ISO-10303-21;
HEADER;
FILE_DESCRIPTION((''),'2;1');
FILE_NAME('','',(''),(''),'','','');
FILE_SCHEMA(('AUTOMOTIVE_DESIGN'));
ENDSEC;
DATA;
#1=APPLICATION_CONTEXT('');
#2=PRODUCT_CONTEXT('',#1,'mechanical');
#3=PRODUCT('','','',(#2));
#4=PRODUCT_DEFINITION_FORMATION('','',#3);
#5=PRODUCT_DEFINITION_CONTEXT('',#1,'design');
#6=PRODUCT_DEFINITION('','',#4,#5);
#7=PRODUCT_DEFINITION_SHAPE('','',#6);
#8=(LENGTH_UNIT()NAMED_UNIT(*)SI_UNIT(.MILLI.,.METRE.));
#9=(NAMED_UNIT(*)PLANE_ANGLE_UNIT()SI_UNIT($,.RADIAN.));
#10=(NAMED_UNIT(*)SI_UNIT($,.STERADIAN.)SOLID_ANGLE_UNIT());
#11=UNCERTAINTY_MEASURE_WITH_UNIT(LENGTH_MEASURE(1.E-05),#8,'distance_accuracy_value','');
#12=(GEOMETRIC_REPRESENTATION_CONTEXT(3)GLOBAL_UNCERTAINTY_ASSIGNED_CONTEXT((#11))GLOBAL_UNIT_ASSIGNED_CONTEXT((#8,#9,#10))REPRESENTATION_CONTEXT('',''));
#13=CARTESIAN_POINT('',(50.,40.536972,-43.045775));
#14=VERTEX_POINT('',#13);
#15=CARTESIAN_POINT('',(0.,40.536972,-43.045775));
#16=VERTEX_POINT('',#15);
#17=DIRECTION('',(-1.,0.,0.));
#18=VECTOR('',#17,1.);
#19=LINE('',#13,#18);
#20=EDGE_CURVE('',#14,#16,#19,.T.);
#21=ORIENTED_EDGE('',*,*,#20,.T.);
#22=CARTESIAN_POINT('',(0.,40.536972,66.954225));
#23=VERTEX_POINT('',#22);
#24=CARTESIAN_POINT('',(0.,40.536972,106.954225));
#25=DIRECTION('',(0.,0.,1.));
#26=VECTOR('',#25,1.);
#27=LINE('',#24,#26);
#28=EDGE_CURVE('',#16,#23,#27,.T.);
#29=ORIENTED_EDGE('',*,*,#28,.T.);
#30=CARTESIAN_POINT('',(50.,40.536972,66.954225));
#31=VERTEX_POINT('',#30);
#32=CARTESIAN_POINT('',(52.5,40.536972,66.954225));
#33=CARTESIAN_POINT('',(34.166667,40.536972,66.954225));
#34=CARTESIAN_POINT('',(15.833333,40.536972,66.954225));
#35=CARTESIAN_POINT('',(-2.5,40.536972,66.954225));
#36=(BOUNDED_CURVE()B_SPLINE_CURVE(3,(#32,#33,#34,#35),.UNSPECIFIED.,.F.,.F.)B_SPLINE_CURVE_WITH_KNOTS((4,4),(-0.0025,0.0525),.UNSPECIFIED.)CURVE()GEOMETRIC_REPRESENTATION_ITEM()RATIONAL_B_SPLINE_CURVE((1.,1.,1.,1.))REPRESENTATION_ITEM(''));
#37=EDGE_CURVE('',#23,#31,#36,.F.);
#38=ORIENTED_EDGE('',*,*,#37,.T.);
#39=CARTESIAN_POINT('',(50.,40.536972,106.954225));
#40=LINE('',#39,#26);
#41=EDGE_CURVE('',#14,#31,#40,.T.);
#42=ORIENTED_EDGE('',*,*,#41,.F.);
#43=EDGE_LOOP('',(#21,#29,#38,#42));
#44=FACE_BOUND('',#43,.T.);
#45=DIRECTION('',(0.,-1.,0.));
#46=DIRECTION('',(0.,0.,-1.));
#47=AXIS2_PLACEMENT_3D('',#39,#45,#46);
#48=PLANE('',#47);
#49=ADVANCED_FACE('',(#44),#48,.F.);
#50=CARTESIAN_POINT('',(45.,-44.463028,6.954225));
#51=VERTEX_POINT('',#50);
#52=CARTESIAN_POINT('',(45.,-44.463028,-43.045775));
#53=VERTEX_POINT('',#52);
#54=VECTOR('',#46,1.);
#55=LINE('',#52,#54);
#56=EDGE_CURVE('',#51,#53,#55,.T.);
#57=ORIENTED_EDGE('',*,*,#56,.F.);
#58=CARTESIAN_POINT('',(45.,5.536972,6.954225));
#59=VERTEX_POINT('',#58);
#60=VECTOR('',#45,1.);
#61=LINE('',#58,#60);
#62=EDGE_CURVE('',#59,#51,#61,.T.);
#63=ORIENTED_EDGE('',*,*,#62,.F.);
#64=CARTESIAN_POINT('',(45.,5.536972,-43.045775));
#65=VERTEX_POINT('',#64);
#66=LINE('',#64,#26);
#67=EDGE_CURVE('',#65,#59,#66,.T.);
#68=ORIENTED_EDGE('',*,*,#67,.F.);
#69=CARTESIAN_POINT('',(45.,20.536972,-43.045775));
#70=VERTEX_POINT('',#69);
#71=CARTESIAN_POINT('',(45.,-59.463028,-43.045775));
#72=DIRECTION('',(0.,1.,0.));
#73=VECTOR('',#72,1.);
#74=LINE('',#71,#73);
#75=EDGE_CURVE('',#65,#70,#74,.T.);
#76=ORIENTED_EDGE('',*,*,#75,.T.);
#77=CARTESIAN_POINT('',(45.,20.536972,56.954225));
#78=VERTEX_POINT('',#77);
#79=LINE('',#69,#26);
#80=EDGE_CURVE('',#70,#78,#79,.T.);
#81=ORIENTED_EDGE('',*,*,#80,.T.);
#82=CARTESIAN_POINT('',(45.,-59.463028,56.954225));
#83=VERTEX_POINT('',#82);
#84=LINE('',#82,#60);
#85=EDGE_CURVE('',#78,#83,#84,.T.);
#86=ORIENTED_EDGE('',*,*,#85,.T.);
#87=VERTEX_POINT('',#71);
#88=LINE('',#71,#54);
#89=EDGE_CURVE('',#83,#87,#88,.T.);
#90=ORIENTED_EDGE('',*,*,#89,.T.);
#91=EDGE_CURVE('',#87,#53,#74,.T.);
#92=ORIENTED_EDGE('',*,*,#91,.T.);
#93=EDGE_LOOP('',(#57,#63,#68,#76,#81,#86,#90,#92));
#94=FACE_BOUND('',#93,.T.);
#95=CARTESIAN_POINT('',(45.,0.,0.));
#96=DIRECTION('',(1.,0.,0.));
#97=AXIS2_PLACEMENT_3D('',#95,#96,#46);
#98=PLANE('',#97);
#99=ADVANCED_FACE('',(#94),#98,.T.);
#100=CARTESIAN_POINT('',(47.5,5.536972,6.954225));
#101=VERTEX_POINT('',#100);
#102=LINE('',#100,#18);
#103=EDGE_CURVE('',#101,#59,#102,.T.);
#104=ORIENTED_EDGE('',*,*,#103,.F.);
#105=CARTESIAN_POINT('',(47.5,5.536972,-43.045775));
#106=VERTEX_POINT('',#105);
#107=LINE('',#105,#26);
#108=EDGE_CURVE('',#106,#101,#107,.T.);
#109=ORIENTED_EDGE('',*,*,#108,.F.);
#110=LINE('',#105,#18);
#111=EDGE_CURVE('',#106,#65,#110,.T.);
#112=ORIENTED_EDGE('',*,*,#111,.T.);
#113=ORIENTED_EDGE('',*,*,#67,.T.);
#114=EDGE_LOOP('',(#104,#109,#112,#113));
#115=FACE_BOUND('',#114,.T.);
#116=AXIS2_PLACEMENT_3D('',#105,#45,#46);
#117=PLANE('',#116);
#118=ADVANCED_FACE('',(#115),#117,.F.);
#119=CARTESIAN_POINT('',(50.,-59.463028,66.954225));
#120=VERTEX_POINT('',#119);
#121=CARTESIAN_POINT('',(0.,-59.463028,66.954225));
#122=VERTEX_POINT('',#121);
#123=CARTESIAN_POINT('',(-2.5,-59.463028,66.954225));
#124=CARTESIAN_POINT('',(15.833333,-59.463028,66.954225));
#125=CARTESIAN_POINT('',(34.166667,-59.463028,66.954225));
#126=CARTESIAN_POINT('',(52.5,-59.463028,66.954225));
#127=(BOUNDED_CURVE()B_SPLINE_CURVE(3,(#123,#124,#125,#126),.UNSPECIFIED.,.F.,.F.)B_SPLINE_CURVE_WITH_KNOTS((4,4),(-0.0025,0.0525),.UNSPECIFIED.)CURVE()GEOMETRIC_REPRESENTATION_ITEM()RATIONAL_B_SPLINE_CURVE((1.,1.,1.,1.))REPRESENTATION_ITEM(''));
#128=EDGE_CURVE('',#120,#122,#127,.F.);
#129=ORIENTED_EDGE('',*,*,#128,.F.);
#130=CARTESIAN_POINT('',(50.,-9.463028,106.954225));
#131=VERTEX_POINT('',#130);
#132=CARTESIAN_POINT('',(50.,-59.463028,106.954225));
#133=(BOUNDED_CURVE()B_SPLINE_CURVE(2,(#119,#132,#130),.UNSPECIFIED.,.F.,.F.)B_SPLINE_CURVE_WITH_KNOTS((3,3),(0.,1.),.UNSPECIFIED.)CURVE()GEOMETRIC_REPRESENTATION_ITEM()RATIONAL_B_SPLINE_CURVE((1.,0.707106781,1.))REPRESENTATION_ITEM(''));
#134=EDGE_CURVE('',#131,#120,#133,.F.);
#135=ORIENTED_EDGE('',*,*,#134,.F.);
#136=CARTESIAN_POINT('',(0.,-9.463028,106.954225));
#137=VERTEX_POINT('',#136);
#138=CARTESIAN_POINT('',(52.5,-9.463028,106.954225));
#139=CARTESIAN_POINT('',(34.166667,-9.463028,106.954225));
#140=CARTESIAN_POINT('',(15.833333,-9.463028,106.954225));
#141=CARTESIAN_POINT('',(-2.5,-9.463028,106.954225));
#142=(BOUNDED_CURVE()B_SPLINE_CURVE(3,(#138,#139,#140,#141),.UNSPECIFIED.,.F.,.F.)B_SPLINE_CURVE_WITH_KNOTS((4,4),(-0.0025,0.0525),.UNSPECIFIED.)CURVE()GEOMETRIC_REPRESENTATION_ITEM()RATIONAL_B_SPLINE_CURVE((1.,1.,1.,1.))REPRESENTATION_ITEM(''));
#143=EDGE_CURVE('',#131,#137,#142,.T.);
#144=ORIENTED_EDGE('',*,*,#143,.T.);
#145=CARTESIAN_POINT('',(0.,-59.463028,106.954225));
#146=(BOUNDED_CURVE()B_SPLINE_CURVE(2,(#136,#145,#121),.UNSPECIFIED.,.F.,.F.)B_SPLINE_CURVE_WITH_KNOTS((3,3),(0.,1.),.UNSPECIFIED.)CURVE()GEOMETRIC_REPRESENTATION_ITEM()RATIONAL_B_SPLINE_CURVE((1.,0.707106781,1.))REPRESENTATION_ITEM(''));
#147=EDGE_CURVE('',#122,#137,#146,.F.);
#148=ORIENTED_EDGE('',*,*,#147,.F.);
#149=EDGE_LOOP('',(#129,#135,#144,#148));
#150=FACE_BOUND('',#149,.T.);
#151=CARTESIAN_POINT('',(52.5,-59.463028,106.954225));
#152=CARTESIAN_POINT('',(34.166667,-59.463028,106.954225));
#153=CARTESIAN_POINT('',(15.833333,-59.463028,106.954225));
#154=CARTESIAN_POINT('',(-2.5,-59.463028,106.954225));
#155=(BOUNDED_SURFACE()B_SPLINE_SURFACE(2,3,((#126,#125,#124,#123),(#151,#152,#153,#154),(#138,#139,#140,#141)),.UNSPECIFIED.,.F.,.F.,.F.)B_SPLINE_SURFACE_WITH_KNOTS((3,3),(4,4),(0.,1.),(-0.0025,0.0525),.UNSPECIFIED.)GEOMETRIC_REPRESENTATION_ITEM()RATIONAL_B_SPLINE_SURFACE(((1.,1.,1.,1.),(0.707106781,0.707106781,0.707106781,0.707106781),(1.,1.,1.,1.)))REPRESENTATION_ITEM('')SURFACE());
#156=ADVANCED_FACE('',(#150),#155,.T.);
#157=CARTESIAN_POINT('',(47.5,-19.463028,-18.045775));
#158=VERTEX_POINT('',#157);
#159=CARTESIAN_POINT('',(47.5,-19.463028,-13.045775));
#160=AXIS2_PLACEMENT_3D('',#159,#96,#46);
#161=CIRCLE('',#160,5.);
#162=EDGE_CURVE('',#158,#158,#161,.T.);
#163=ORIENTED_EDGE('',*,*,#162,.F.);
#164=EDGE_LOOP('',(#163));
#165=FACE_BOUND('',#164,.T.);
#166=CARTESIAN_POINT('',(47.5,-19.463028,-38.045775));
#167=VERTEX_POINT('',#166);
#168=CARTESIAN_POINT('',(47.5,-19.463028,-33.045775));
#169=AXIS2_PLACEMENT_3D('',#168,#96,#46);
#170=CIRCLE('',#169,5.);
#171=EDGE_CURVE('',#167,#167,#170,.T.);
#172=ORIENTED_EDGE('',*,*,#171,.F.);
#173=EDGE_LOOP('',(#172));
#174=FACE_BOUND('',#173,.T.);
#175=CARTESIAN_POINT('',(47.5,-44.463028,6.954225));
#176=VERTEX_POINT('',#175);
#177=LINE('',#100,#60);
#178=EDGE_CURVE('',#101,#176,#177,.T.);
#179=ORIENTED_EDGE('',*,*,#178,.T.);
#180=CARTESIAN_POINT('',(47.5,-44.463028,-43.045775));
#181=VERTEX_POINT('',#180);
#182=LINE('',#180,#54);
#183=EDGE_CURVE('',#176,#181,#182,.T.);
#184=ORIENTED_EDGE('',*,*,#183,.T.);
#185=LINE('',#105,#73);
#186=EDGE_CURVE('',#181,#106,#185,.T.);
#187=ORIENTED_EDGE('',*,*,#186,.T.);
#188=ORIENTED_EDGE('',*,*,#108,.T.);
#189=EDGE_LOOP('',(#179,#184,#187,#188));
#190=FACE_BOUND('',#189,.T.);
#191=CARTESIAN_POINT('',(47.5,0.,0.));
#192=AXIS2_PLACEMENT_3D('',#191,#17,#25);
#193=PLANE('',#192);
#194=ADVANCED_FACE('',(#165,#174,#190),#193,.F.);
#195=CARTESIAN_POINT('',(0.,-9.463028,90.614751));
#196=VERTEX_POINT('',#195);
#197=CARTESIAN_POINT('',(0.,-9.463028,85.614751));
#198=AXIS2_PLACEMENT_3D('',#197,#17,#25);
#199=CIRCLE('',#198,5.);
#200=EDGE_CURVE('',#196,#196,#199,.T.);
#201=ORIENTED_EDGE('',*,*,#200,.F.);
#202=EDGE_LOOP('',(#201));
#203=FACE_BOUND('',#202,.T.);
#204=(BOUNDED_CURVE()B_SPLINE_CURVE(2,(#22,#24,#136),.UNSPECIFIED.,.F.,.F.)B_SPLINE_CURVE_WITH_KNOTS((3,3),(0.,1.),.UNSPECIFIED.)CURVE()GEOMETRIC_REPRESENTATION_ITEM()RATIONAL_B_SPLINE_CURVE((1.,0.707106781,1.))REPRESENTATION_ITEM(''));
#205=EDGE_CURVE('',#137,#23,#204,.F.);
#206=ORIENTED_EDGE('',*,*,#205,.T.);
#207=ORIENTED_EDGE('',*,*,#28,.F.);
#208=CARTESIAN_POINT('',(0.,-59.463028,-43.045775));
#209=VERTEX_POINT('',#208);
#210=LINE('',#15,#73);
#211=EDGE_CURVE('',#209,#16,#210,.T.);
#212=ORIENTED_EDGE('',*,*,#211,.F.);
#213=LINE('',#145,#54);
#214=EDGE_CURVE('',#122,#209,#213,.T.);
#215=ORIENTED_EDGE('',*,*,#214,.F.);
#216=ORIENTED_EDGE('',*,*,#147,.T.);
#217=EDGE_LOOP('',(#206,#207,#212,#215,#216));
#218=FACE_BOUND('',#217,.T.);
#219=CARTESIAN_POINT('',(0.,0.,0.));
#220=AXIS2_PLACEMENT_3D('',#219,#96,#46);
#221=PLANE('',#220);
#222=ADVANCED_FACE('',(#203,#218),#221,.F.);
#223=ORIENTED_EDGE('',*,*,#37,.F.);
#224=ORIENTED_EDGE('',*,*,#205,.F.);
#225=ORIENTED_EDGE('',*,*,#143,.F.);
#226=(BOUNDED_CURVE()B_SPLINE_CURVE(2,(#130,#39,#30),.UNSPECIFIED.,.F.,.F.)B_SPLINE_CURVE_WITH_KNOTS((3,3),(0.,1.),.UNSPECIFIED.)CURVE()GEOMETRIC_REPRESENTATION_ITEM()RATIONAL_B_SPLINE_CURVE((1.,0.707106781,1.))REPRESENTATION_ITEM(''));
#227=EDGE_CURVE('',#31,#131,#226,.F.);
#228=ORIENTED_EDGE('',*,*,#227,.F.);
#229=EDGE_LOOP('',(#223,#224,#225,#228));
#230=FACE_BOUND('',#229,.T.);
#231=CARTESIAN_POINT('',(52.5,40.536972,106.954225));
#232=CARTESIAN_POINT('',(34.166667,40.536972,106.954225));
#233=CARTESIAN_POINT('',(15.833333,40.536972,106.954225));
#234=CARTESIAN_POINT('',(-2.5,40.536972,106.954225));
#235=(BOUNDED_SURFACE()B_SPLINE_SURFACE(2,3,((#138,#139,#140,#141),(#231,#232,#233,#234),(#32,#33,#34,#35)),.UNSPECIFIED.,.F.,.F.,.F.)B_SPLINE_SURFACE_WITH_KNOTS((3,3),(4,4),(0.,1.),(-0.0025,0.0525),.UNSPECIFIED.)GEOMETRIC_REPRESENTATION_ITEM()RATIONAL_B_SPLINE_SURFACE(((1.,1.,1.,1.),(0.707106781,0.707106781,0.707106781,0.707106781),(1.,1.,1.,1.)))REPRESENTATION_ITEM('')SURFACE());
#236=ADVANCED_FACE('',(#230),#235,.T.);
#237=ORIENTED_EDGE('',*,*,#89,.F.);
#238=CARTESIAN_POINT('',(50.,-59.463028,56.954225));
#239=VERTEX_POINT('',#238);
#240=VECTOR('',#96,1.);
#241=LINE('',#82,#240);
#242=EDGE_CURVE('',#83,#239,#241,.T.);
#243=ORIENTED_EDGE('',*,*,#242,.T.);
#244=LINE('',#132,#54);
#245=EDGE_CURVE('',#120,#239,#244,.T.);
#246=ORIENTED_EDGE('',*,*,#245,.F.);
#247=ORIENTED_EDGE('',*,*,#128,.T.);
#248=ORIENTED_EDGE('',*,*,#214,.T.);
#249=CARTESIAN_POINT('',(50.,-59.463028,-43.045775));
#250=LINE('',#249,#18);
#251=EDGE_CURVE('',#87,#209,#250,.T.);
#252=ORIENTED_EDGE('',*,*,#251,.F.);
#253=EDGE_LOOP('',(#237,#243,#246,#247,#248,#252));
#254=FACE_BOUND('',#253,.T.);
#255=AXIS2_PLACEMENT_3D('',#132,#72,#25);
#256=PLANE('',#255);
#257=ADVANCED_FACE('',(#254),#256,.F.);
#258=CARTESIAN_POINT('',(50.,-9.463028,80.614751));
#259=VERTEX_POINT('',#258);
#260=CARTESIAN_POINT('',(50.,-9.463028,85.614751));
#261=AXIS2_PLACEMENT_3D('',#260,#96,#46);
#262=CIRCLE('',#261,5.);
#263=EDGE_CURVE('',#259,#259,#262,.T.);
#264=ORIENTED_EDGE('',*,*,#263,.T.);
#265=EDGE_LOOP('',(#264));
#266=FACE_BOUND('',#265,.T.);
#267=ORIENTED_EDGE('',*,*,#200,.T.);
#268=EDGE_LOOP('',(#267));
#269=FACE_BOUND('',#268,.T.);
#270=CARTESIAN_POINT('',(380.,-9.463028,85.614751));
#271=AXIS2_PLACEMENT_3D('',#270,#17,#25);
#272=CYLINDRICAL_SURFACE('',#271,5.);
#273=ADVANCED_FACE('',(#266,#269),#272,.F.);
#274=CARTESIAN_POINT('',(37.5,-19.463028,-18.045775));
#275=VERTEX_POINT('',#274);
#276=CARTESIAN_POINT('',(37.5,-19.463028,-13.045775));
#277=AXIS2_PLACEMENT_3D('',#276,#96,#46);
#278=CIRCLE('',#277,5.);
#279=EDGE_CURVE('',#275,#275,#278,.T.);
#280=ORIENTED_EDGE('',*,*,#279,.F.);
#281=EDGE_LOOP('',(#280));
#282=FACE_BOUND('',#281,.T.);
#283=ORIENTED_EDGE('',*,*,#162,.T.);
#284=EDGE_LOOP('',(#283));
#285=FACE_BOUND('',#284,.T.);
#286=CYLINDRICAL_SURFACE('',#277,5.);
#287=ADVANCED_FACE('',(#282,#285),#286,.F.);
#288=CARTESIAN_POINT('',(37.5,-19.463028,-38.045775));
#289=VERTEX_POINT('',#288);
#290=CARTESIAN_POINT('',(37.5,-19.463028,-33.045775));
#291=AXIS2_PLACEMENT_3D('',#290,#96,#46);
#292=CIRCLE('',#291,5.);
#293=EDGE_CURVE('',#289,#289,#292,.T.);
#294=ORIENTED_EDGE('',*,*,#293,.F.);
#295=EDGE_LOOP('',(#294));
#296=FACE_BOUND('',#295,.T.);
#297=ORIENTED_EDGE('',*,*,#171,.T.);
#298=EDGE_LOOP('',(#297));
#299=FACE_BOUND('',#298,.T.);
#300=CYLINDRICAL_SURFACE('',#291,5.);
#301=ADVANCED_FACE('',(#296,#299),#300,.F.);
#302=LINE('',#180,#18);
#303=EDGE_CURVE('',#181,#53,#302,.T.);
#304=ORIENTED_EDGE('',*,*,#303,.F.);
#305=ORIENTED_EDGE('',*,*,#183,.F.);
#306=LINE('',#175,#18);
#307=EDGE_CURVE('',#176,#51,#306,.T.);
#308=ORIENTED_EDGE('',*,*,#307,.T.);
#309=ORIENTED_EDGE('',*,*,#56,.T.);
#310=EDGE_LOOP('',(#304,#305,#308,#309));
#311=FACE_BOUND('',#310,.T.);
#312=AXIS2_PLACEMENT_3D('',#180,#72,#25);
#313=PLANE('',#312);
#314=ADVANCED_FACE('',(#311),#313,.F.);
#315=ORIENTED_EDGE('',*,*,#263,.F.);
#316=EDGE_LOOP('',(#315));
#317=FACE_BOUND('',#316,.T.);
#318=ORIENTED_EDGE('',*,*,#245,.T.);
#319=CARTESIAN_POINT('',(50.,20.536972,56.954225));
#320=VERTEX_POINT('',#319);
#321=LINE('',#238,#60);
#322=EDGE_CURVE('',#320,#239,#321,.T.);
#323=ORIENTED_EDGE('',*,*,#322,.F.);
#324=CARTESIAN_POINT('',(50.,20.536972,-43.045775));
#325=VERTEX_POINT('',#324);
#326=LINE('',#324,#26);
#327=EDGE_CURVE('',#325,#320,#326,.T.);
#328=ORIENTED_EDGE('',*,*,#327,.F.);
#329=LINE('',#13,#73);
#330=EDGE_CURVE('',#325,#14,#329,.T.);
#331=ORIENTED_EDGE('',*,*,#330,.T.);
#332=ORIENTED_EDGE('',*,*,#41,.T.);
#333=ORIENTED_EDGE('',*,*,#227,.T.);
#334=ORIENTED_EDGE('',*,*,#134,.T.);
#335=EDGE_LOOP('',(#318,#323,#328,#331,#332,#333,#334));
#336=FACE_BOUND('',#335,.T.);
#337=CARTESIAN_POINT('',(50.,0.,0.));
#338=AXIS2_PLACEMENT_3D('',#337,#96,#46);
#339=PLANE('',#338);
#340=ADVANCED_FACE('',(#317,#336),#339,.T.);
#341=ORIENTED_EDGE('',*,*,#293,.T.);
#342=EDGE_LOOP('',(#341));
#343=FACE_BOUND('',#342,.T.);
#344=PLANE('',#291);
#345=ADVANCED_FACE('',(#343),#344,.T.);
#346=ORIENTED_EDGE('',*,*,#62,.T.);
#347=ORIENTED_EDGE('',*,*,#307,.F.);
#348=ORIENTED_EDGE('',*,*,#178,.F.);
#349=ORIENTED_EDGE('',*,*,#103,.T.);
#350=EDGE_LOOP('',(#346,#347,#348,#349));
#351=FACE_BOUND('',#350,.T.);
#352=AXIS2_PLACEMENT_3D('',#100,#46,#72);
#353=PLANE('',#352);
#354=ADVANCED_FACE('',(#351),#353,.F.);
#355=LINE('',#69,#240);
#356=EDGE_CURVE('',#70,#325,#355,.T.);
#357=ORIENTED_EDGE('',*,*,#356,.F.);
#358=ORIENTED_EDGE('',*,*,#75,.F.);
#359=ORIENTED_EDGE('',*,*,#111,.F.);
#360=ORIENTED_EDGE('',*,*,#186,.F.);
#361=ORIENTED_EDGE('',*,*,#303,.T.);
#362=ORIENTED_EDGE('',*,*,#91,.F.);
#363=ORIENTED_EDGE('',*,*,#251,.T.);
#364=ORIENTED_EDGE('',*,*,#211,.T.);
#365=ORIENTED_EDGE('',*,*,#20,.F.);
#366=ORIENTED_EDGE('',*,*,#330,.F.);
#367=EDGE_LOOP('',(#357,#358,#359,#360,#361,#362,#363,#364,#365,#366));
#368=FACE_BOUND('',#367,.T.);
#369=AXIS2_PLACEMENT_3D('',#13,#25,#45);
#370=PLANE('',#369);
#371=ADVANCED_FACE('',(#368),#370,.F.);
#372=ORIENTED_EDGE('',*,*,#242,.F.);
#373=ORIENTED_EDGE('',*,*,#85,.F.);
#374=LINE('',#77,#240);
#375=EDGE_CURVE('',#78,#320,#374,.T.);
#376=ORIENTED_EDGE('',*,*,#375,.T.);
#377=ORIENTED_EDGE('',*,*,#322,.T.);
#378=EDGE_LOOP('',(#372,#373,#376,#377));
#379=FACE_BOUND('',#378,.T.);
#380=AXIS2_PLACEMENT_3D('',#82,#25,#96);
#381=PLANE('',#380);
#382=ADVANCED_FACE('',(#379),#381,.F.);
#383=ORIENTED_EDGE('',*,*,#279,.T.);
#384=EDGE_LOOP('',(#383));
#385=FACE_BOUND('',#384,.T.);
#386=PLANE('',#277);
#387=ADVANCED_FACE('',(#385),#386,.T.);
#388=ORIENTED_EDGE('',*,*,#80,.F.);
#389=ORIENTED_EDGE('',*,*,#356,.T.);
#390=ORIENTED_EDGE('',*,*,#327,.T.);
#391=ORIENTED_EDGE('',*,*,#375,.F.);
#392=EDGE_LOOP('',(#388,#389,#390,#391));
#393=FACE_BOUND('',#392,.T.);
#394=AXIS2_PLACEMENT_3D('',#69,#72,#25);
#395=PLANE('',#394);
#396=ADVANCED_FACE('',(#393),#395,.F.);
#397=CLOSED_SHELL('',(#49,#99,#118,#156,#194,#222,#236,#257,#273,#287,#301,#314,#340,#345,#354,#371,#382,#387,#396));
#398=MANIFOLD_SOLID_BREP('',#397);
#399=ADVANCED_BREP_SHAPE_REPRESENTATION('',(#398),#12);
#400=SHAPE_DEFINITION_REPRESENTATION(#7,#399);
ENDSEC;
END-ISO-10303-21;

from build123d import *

# Parameters (mm, degrees)
SKIZZE1_W                       = 150
SKIZZE1_H                       = 100
AUFSATZ_LINEAR_AUSTRAGEN1_DEPTH = 50
SKIZZE2_W                       = 100
SKIZZE2_H                       = 80
SCHNITT_LINEAR_AUSTRAGEN1_DEPTH = 5
SKIZZE3_W                       = 50
SKIZZE3_H                       = 50
AUFSATZ_LINEAR_AUSTRAGEN2_DEPTH = 2.5
SKIZZE4_R                       = 5
SCHNITT_LINEAR_AUSTRAGEN2_DEPTH = 10
VERRUNDUNG1_SIZE                = 50
VERRUNDUNG1_SIZE_2              = 40
SKIZZE5_R                       = 5
SCHNITT_LINEAR_AUSTRAGEN3_DEPTH = 380


with BuildPart() as part:
    # Skizze1 → Aufsatz-Linear austragen1 (new body)
    with BuildSketch(Plane(origin=(0, 0, 0), x_dir=(0, 0, -1), z_dir=(1, 0, 0))):
        with Locations((-31.954225352, -9.463028169)):
            Rectangle(SKIZZE1_W, SKIZZE1_H)
    extrude(amount=AUFSATZ_LINEAR_AUSTRAGEN1_DEPTH)

    # Skizze2 → Schnitt-Linear austragen1 (cut)
    with BuildSketch(Plane(origin=(50, 0, 0), x_dir=(0, 0, -1), z_dir=(1, 0, 0))):
        with Locations((-6.954225352, -19.463028169)):
            Rectangle(SKIZZE2_W, SKIZZE2_H)
    extrude(amount=-SCHNITT_LINEAR_AUSTRAGEN1_DEPTH, mode=Mode.SUBTRACT)

    # Skizze3 → Aufsatz-Linear austragen2 (add)
    with BuildSketch(Plane(origin=(45, 0, 0), x_dir=(0, 0, -1), z_dir=(1, 0, 0))):
        with Locations((18.045774648, -19.463028169)):
            Rectangle(SKIZZE3_W, SKIZZE3_H)
    extrude(amount=AUFSATZ_LINEAR_AUSTRAGEN2_DEPTH)

    # Skizze4 → Schnitt-Linear austragen2 (cut)
    with BuildSketch(Plane(origin=(47.5, 0, 0), x_dir=(0, 0, -1), z_dir=(1, 0, 0))):
        with Locations((33.045774648, -19.463028169)):
            Circle(SKIZZE4_R)
        with Locations((13.045774648, -19.463028169)):
            Circle(SKIZZE4_R)
    extrude(amount=-SCHNITT_LINEAR_AUSTRAGEN2_DEPTH, mode=Mode.SUBTRACT)

    # Verrundung1
    # an asymmetric fillet: 50, 40 mm, written as the material it takes off along each edge
    with BuildSketch(Plane(origin=(-125, -59.463028169, 106.954225352), x_dir=(0, 1, 0), z_dir=(1, 0, 0))) as verrundung1_piece_1:
        with BuildLine():
            Bezier((VERRUNDUNG1_SIZE, 0), (0, 0), (0, -VERRUNDUNG1_SIZE_2), weights=[1, 0.707106781, 1])
            Line((0, -VERRUNDUNG1_SIZE_2), (0, 0))
            Line((0, 0), (VERRUNDUNG1_SIZE, 0))
        make_face()
    extrude(amount=300, mode=Mode.SUBTRACT)
    with BuildSketch(Plane(origin=(-125, 40.536971831, 106.954225352), x_dir=(0, 0, -1), z_dir=(1, 0, 0))) as verrundung1_piece_2:
        with BuildLine():
            Bezier((VERRUNDUNG1_SIZE_2, 0), (0, 0), (0, -VERRUNDUNG1_SIZE), weights=[1, 0.707106781, 1])
            Line((0, -VERRUNDUNG1_SIZE), (0, 0))
            Line((0, 0), (VERRUNDUNG1_SIZE_2, 0))
        make_face()
    extrude(amount=300, mode=Mode.SUBTRACT)

    # Skizze5 → Schnitt-Linear austragen3 (cut)
    with BuildSketch(Plane.ZY):
        with Locations((85.614751131, -9.463028169)):
            Circle(SKIZZE5_R)
    extrude(amount=-SCHNITT_LINEAR_AUSTRAGEN3_DEPTH, mode=Mode.SUBTRACT)


solid = part.part
